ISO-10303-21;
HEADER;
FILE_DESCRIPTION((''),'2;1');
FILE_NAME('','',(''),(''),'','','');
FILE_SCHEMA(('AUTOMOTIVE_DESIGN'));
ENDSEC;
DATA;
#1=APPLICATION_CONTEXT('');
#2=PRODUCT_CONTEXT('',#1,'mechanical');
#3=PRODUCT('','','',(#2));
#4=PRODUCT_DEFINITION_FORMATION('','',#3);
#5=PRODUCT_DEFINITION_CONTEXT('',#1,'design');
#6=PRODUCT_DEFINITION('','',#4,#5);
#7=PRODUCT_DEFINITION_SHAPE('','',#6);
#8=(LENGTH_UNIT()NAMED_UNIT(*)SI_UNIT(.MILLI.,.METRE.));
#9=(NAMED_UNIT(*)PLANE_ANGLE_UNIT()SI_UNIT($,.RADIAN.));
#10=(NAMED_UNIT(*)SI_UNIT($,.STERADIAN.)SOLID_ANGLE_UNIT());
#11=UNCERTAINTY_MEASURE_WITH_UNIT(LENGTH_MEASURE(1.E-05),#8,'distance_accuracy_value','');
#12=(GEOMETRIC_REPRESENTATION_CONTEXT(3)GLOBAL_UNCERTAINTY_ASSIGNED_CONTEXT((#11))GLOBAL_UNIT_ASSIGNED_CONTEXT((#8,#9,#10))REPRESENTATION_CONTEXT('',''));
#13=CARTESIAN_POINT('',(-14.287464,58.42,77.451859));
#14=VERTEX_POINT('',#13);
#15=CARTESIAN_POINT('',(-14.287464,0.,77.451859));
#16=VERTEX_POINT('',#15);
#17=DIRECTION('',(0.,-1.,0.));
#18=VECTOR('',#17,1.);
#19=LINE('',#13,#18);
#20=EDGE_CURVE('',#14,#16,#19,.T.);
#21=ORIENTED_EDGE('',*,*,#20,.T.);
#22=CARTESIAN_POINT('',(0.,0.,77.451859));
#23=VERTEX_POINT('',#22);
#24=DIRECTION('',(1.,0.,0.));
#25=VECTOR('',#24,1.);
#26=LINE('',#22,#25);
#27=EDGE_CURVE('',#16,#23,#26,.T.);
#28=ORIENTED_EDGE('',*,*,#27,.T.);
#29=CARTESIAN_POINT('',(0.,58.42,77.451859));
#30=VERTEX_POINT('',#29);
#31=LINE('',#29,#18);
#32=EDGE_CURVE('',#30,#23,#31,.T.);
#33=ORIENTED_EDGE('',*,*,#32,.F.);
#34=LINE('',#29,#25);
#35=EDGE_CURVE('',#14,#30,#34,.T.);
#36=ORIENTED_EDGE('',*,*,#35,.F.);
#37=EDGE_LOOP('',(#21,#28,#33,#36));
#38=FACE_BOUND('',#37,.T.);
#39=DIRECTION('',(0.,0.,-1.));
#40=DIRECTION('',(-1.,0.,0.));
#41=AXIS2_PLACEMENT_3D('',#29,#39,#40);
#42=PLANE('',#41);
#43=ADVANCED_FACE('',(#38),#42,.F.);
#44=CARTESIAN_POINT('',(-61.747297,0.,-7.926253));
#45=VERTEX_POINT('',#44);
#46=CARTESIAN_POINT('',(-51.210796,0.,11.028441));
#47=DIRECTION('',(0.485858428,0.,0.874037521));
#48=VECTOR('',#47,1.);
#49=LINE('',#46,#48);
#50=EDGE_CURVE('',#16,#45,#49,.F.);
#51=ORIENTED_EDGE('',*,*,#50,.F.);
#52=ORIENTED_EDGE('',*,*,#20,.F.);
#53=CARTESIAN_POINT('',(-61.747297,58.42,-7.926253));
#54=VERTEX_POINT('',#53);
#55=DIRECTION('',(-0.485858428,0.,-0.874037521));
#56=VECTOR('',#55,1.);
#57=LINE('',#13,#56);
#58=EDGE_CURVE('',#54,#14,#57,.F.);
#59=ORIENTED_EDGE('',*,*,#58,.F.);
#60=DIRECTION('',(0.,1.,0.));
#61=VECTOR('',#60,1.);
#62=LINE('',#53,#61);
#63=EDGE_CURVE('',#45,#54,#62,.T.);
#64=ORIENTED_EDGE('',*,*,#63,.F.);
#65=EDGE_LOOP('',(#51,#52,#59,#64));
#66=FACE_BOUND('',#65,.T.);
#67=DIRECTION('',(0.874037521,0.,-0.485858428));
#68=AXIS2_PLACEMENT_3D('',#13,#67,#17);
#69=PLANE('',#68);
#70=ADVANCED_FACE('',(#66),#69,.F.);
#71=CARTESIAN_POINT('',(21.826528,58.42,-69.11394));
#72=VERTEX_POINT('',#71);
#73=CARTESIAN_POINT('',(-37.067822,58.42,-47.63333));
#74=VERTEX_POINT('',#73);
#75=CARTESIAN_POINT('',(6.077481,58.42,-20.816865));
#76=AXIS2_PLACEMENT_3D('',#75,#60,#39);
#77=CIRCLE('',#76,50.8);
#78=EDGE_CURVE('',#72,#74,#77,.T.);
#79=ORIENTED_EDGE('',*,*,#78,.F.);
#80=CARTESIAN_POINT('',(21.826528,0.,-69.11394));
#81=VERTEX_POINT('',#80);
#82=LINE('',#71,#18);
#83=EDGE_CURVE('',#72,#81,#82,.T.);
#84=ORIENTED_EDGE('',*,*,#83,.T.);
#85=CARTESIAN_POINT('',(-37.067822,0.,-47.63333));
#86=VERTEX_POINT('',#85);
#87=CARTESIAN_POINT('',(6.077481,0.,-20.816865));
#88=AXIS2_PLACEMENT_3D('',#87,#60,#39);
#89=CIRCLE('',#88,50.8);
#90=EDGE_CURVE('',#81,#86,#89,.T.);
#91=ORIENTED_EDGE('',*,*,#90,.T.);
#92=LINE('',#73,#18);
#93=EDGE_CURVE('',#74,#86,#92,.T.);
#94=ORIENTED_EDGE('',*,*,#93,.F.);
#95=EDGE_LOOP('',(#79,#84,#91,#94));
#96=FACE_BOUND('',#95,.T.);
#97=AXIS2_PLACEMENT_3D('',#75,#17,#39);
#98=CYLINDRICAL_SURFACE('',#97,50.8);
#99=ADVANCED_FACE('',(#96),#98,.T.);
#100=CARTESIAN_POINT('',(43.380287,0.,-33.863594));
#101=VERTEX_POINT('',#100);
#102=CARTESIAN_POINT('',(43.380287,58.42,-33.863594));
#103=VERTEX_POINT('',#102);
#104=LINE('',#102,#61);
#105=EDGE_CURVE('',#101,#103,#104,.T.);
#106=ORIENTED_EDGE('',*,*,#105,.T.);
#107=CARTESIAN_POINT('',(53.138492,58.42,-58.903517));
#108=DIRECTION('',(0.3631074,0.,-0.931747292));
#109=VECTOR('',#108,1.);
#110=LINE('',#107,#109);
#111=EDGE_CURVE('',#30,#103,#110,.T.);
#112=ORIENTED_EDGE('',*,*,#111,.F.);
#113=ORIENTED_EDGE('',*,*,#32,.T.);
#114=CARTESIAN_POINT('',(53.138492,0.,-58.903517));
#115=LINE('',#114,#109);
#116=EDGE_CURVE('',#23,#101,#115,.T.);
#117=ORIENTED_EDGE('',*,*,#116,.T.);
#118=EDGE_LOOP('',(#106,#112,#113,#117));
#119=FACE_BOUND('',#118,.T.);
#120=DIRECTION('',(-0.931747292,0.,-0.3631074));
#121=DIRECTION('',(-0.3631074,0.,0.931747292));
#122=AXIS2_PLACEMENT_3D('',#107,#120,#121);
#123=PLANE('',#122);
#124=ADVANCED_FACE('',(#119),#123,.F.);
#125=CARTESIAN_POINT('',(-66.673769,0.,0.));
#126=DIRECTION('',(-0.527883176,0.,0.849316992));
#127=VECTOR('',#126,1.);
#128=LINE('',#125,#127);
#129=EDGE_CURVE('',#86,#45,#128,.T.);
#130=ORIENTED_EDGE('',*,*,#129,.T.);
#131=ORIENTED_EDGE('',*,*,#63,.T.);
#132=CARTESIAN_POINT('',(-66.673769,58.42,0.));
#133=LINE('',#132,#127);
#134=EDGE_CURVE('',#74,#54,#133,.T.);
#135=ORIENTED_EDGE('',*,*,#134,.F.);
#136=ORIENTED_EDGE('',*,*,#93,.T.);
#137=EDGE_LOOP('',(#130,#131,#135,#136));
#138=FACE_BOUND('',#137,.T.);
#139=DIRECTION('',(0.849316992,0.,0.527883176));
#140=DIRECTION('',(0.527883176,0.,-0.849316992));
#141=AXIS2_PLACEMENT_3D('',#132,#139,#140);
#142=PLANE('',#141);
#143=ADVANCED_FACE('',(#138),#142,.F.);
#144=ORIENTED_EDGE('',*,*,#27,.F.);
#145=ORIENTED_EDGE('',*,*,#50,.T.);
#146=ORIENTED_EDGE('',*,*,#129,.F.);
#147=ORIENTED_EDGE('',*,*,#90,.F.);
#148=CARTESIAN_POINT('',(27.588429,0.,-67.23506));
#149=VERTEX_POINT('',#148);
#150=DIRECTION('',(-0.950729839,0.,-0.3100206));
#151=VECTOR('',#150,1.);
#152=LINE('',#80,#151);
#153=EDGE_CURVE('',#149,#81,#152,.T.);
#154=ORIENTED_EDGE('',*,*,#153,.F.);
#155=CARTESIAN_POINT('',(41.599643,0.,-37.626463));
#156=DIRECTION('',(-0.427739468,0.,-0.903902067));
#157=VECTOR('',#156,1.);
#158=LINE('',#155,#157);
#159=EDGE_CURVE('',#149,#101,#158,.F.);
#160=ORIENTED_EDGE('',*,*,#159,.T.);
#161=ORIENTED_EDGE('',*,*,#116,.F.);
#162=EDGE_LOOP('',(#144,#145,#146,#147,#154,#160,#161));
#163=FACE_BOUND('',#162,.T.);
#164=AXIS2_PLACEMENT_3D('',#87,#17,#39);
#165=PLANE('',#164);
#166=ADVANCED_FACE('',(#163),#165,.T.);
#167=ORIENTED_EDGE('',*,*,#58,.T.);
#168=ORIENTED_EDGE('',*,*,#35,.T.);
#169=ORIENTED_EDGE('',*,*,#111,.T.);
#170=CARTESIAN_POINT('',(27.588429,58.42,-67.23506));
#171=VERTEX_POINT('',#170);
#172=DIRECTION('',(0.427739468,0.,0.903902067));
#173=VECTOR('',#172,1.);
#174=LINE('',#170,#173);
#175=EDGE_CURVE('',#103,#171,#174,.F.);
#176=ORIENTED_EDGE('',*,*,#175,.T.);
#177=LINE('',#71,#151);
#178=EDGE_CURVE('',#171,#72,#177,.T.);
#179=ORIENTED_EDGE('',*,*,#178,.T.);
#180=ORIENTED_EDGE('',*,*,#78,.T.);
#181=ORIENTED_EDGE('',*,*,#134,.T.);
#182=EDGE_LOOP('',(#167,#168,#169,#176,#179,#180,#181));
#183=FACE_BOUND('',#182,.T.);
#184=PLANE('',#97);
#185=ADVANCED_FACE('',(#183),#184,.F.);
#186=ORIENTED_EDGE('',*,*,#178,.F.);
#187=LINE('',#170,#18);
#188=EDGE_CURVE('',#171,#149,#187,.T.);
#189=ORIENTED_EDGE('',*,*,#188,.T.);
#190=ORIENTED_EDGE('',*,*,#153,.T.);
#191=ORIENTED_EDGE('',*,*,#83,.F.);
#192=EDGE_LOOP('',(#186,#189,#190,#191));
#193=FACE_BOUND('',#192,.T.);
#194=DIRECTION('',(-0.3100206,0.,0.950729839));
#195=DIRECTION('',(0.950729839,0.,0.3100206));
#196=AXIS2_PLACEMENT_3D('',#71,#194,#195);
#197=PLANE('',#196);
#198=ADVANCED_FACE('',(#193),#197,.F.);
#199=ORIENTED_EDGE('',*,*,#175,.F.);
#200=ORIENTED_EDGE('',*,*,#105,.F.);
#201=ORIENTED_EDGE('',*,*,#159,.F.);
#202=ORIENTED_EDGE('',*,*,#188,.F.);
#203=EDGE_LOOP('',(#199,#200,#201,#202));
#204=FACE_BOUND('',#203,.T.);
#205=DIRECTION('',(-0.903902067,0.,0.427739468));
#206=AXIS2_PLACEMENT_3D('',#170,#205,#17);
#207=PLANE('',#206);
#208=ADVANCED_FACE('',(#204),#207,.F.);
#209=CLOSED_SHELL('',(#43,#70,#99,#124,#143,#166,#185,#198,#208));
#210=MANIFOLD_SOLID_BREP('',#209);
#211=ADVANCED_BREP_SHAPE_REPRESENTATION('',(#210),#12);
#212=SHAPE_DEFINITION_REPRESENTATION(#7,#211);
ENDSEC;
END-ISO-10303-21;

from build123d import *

# Parameters (mm, degrees)
BOSS_EXTRUDE1_DEPTH = 58.42
CHAMFER5_START      = -95.906013746
CHAMFER5_OUTLINE_W  = 100
CHAMFER5_OUTLINE_H  = 58.42
CHAMFER5_DEPTH      = 45.787595784


with BuildPart() as part:
    # Sketch1 → Boss-Extrude1 (new body)
    with BuildSketch(Plane(origin=(0, 0, 0), x_dir=(1, 0, 0), z_dir=(0, 1, 0))):
        with BuildLine():
            Line((-66.673768512, 0), (-37.067821873, 47.633329988))
            ThreePointArc((-37.067821873, 47.633329988), (-11.329209284, 68.541566023), (21.82652777, 69.113940477))
            Line((21.82652777, 69.113940477), (53.138492197, 58.903517294))
            Line((53.138492197, 58.903517294), (0, -77.45185891))
            Line((0, -77.45185891), (-66.673768512, -77.45185891))
            Line((-66.673768512, -77.45185891), (-66.673768512, 0))
        make_face()
    extrude(amount=BOSS_EXTRUDE1_DEPTH)

    # Chamfer4
    # the kernel refuses this chamfer: 25.4 mm, written as the material it takes off along each edge
    with BuildSketch(Plane(origin=(53.138492197, -68.954815123, -58.903517294), x_dir=(-0.9507298394814789, 0, -0.3100205998309166), z_dir=(0, 1, 0))) as chamfer4_piece_1:
        with BuildLine():
            Line((27.572040722, -0.738386759), (0.816641802, 27.56983389))
            Line((0.816641802, 27.56983389), (0.309449153, 27.598462833))
            ThreePointArc((0.309449153, 27.598462833), (0.269734882, 13.792739557), (-0.507192649, 0.028628943))
            Line((-0.507192649, 0.028628943), (0, -0.508))
            ThreePointArc((0, -0.508), (13.786020361, -0.508), (27.572040722, -1.246386759))
            Line((27.572040722, -1.246386759), (27.572040722, -0.738386759))
        make_face()
    extrude(amount=196.329630245, mode=Mode.SUBTRACT)

    # Chamfer5: read off the stored shape, not the designer's step
    # Chamfer5 outline → Chamfer5 (cut)
    with BuildSketch(Plane(origin=(0, 0, 0), x_dir=(0.48585842778436206, 0, 0.8740375210200692), z_dir=(0.8740375210200692, 0, -0.48585842778436206)).offset(CHAMFER5_START)):
        with Locations((12, -29.21)):
            Rectangle(CHAMFER5_OUTLINE_W, CHAMFER5_OUTLINE_H)
    extrude(amount=CHAMFER5_DEPTH, mode=Mode.SUBTRACT)


solid = part.part
